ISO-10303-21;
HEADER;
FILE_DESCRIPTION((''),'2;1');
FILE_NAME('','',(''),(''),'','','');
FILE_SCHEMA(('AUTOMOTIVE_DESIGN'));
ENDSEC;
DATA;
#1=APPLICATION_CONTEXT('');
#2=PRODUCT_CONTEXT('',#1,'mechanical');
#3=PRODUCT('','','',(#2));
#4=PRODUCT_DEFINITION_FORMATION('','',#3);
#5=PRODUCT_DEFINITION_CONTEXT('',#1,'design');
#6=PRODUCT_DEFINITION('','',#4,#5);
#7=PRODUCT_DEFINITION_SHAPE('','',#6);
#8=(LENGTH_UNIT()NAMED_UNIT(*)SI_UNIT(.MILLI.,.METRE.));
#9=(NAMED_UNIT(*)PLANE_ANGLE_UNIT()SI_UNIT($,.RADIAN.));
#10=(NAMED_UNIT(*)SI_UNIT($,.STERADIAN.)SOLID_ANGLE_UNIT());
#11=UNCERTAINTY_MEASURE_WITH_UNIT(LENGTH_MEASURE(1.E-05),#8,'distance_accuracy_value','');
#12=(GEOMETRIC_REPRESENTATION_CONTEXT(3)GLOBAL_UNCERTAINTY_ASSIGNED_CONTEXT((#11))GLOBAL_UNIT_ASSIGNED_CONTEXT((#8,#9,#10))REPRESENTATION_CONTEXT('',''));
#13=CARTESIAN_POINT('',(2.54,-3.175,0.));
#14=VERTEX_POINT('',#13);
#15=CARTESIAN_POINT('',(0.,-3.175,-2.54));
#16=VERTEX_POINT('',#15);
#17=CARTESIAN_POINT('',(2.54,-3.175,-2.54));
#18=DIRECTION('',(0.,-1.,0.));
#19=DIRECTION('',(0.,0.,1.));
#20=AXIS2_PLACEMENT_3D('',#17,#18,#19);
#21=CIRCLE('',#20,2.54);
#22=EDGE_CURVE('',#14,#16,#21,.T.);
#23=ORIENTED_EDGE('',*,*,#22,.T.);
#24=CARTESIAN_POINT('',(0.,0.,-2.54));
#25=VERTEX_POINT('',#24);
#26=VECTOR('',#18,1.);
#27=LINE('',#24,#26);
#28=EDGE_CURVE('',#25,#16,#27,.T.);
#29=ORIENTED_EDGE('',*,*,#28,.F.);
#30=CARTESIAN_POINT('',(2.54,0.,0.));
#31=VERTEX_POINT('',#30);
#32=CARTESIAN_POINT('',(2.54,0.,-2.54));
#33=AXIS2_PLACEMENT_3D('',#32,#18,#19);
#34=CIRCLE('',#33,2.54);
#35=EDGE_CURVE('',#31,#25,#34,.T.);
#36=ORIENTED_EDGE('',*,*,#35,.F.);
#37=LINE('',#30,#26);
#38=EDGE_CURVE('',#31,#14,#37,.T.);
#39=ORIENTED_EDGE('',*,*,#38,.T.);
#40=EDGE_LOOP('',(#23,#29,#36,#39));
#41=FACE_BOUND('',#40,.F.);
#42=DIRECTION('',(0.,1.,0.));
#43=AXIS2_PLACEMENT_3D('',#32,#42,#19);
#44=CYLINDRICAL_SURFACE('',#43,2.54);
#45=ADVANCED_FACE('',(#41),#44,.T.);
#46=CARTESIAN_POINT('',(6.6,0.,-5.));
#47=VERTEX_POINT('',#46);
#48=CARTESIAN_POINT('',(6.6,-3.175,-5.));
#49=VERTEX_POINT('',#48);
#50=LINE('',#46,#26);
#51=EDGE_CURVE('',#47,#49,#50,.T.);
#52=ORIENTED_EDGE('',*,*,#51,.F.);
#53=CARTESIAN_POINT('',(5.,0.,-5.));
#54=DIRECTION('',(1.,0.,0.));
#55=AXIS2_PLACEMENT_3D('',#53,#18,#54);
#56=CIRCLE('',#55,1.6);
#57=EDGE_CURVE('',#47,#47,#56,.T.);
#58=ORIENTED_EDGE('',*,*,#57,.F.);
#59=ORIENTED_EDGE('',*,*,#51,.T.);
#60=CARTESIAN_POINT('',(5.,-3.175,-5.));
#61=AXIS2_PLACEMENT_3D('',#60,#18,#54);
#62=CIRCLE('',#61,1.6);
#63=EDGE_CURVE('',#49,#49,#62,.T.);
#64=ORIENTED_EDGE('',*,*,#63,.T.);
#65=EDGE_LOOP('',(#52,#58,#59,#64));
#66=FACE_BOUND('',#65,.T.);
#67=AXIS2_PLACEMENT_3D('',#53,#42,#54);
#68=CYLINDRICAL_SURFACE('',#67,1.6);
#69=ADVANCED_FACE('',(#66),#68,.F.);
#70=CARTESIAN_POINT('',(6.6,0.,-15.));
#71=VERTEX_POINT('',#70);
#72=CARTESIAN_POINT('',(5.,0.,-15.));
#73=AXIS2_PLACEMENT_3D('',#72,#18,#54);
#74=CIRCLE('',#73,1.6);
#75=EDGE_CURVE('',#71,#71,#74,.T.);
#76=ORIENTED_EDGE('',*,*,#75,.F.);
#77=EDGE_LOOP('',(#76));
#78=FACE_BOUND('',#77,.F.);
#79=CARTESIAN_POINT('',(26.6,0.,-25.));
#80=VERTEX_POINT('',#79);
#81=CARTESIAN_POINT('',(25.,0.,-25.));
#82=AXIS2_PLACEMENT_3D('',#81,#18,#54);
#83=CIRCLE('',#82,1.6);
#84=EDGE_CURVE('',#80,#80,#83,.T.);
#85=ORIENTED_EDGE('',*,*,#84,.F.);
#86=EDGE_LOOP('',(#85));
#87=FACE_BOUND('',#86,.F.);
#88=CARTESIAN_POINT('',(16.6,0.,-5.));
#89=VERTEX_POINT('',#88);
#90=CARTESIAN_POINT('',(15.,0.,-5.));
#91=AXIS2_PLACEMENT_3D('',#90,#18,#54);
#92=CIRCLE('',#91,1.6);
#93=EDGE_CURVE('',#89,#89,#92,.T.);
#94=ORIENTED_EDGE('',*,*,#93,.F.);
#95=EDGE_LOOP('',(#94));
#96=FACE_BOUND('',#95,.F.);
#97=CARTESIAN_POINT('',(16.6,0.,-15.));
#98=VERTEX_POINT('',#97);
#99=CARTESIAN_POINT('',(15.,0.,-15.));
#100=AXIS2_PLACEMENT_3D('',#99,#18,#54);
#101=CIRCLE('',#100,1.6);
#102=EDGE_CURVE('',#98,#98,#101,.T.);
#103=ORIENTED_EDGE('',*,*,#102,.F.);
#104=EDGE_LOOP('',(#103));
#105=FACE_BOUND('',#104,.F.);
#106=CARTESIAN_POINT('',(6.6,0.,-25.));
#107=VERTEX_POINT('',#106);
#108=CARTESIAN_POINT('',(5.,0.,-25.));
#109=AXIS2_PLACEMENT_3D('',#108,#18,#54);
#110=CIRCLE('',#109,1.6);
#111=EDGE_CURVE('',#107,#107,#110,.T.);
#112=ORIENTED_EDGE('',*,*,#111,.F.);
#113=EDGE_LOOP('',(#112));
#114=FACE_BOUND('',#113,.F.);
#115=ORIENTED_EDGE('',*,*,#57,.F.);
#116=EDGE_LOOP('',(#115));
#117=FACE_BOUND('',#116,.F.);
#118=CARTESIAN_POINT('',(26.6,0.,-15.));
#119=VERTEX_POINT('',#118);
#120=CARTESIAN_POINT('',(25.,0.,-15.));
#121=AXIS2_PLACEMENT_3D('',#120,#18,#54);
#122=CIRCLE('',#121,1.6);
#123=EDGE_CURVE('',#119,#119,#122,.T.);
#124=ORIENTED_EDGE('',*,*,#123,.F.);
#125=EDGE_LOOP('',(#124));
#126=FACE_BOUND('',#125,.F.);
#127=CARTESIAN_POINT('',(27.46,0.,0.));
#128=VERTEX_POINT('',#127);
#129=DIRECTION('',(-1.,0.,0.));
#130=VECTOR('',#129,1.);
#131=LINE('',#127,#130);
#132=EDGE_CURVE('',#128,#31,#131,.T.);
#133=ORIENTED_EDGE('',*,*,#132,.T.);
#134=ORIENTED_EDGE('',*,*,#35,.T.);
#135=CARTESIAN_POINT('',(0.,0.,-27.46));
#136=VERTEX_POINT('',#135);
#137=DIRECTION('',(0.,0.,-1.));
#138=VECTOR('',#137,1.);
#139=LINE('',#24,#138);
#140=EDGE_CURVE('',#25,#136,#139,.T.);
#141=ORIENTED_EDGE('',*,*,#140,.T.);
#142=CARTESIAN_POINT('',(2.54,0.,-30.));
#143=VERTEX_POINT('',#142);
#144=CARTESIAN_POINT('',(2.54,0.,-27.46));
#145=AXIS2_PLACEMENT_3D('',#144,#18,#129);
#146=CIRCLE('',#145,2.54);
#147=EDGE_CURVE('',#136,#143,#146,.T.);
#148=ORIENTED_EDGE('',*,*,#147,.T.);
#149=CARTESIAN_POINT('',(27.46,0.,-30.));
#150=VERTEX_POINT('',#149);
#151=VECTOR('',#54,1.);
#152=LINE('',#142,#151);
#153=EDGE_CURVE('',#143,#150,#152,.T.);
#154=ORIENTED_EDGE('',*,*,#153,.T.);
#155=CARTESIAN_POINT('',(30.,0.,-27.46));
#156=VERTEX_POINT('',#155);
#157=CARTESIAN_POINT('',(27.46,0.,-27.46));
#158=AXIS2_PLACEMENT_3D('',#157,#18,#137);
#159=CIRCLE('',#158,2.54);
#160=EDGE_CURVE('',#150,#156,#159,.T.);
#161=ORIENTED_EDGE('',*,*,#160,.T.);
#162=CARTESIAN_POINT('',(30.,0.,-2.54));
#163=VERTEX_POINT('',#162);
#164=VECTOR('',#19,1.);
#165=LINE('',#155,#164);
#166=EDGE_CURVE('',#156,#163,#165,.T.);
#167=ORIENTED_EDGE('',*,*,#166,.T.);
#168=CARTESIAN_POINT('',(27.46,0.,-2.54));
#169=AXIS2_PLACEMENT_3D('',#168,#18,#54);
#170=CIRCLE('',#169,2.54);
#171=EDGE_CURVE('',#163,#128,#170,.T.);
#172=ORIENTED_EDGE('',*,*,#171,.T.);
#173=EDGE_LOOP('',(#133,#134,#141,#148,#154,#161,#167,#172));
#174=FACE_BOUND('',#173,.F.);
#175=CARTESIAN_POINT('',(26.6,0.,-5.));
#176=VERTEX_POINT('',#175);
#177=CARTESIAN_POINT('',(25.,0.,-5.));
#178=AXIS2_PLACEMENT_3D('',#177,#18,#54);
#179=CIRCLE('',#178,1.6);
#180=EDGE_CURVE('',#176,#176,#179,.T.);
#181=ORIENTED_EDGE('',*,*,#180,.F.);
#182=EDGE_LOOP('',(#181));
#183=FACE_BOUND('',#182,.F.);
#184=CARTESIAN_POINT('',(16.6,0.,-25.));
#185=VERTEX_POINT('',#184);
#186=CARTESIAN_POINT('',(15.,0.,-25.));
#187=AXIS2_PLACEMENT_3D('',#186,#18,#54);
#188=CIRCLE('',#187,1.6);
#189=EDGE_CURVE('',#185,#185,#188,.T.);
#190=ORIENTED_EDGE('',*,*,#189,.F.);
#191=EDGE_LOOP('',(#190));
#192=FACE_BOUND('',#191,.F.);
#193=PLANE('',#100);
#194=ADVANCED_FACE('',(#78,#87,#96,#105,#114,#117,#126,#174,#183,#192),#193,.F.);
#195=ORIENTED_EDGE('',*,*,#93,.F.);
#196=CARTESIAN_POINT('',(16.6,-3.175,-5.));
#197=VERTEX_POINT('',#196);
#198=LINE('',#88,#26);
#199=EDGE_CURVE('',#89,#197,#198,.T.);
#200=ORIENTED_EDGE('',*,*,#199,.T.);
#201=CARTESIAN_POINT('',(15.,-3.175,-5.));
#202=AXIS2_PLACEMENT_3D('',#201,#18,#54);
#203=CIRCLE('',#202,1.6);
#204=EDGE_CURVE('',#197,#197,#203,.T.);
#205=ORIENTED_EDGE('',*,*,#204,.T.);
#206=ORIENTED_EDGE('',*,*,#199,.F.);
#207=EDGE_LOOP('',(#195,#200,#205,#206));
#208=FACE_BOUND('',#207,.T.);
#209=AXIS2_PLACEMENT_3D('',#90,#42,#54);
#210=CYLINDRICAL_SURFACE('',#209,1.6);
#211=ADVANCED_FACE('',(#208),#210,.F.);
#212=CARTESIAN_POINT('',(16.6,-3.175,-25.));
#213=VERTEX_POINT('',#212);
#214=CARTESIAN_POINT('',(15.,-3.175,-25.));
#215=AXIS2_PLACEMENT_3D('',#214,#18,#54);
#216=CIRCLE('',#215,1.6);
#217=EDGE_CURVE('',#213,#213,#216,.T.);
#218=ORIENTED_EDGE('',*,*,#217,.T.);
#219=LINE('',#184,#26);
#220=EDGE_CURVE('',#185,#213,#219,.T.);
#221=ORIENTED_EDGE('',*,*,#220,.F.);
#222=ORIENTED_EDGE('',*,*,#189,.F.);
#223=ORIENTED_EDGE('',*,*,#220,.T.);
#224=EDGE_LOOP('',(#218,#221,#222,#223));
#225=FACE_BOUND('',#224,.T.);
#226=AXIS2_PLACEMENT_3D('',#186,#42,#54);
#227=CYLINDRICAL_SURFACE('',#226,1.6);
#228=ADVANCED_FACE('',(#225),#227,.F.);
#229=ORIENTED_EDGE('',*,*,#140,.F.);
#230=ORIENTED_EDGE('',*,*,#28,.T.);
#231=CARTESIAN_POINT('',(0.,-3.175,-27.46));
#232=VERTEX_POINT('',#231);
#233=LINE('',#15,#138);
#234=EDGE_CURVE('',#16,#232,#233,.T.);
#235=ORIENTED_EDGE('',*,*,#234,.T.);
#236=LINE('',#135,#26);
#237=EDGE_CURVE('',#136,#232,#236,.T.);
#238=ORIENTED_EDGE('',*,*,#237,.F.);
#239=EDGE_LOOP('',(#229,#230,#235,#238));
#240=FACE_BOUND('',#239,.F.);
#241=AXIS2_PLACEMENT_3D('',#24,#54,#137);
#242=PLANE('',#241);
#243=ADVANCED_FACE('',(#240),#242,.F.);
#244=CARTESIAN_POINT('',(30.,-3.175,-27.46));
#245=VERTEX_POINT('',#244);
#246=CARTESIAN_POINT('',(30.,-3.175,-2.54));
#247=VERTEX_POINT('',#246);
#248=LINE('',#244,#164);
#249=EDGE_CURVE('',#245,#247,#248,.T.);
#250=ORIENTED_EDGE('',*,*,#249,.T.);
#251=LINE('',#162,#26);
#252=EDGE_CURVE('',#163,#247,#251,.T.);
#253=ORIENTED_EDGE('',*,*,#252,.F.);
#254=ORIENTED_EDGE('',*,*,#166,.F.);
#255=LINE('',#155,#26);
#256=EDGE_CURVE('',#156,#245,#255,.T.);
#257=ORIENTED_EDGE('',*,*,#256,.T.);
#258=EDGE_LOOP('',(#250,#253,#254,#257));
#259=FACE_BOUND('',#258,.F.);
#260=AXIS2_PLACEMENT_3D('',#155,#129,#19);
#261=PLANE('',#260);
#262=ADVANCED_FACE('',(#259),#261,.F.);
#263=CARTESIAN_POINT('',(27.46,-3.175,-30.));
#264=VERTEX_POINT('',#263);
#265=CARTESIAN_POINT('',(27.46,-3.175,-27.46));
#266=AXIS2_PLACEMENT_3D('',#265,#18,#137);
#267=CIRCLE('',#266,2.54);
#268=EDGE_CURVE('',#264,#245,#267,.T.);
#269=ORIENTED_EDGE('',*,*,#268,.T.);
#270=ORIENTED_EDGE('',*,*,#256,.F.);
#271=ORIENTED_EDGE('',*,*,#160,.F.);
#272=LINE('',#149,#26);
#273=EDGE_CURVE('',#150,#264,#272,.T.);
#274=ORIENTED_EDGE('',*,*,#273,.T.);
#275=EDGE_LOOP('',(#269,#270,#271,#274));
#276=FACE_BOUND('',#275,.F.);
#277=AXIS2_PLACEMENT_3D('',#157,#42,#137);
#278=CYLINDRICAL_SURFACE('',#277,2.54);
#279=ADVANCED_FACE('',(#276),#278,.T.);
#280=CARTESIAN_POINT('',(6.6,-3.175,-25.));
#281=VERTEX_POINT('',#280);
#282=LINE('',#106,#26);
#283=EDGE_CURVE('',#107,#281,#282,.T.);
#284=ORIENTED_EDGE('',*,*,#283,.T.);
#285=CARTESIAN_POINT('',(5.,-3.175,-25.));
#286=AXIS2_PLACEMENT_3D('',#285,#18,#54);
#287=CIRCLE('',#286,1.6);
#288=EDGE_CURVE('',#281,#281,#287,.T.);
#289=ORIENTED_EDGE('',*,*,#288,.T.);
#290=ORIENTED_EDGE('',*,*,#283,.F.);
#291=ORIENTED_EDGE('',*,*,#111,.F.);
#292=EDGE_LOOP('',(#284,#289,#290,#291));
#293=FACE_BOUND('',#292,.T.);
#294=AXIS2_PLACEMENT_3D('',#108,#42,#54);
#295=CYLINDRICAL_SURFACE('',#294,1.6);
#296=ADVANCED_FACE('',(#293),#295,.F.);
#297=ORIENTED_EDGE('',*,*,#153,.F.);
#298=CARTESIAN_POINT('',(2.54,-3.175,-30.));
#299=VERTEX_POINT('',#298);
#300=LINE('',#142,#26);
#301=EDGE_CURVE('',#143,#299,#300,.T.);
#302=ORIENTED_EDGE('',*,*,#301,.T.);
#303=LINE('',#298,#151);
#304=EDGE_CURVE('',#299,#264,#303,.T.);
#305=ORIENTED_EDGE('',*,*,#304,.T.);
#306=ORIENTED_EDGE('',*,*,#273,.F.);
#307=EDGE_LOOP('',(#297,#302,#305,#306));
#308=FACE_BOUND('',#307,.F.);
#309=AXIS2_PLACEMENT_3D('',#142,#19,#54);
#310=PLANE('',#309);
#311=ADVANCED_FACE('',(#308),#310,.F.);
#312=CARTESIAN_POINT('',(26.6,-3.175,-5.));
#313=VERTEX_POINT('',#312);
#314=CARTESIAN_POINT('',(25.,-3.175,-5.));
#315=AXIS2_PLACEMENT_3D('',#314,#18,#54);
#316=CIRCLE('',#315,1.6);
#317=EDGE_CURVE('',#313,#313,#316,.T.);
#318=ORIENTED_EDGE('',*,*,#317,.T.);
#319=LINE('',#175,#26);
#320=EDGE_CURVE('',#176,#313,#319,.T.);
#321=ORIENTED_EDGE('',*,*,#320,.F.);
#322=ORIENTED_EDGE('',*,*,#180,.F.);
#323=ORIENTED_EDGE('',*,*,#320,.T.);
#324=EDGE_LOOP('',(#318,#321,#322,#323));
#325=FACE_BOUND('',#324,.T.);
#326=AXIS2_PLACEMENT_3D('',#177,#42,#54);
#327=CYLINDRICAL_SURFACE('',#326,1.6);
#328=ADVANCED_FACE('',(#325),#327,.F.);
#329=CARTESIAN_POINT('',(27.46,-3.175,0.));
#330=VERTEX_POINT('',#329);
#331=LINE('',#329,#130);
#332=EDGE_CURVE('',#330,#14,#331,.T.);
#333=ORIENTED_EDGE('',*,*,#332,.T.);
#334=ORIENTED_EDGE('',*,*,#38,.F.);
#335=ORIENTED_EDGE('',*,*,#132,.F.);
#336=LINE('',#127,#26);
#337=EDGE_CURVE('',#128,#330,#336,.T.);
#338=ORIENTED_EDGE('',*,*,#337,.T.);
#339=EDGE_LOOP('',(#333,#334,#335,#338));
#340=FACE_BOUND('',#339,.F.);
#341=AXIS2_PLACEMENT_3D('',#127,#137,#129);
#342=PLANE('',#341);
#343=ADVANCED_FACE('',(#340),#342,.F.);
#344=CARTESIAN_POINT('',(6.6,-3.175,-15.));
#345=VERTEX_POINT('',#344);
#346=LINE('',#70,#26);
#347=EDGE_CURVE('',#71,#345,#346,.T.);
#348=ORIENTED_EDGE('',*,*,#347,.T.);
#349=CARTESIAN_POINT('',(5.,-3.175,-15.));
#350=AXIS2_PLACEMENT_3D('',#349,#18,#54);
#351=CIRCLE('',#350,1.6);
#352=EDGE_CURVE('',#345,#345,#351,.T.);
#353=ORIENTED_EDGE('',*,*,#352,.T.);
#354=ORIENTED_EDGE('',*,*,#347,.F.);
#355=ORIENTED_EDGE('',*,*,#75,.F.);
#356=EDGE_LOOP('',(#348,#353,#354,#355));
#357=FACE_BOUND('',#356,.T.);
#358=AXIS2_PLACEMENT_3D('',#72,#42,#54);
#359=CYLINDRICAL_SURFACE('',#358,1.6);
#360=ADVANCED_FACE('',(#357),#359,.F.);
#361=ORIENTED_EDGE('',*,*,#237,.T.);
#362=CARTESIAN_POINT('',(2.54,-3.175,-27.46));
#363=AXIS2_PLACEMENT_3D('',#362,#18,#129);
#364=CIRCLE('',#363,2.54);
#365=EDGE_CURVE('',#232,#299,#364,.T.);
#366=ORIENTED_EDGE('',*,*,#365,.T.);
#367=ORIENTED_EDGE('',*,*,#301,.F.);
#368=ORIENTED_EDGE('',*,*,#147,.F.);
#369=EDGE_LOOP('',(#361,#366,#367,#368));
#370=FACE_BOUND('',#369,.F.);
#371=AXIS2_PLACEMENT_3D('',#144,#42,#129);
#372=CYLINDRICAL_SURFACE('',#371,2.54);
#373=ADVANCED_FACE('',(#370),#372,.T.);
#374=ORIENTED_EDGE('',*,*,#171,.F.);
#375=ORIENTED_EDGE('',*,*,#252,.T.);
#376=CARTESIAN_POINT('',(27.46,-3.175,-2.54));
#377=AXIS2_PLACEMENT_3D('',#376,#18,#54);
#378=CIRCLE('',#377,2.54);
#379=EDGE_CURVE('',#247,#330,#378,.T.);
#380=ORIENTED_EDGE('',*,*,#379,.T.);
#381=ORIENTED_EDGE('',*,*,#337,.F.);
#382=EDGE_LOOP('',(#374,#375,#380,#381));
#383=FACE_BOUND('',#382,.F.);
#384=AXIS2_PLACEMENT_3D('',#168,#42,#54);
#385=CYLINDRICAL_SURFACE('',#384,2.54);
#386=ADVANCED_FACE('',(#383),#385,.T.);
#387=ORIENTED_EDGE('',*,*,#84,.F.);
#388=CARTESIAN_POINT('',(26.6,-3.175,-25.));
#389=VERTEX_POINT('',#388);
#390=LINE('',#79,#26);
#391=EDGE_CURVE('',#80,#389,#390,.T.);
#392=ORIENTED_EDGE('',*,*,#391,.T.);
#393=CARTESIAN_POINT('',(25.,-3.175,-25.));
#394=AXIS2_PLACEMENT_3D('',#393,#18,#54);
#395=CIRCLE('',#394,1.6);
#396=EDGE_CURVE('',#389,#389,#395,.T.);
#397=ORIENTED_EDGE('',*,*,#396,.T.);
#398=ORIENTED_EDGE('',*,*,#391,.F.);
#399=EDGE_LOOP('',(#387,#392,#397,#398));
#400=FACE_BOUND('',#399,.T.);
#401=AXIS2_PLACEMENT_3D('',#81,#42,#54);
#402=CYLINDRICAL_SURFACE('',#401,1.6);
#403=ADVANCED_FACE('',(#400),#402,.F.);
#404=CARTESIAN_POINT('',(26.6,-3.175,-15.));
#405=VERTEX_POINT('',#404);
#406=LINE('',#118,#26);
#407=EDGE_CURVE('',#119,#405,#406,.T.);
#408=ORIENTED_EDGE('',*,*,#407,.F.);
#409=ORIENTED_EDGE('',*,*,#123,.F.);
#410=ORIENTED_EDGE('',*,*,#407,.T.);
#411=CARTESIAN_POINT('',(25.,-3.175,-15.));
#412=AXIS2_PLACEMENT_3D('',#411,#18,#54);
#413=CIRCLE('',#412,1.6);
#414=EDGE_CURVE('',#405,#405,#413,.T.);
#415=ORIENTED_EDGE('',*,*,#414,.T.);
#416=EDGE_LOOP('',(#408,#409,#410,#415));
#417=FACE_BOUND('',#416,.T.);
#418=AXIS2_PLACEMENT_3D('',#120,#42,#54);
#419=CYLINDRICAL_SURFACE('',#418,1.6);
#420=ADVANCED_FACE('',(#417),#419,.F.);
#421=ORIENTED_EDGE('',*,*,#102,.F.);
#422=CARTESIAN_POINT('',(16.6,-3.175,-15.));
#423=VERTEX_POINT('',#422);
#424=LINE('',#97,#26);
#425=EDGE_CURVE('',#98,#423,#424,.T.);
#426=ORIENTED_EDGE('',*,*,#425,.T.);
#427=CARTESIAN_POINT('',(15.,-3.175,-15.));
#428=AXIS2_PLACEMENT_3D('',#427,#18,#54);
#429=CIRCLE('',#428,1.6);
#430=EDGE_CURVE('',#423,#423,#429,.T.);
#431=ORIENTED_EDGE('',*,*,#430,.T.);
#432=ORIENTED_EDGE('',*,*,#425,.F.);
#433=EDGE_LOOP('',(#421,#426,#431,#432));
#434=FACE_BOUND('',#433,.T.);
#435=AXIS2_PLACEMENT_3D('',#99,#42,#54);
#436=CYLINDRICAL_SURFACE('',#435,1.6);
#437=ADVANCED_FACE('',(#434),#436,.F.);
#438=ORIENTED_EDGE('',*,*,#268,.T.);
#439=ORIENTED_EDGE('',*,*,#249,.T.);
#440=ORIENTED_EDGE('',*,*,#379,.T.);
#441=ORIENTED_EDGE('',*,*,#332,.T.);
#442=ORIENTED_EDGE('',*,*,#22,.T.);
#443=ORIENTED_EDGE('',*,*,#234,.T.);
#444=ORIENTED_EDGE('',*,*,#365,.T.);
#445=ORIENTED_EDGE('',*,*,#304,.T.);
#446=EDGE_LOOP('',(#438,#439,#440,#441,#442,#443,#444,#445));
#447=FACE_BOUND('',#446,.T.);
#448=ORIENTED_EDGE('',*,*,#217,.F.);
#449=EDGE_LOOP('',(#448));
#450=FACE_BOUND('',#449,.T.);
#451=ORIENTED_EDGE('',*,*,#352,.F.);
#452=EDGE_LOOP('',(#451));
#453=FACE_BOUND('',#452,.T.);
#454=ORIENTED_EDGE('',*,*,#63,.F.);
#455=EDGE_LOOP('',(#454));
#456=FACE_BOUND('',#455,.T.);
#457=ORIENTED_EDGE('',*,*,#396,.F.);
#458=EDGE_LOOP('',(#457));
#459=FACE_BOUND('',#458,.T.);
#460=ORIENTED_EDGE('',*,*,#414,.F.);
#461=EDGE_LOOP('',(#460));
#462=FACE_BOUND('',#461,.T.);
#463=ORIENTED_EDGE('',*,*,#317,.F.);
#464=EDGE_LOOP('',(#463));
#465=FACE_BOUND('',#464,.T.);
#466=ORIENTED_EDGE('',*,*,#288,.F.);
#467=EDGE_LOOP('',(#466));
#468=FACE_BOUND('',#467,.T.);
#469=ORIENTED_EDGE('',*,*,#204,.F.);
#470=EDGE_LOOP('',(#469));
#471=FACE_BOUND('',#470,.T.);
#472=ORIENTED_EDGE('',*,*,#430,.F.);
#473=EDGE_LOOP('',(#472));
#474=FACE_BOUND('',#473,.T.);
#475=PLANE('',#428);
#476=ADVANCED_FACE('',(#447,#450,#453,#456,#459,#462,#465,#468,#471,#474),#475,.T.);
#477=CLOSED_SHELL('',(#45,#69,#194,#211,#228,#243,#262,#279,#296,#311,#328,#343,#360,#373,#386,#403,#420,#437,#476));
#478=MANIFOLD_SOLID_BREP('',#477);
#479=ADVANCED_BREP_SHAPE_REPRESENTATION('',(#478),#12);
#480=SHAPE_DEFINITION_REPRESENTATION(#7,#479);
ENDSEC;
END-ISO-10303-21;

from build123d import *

# Parameters (mm, degrees)
F0_R     = 1.6
F1_DEPTH = 3.175


# Not quite as in the source:
# - a length typed as a fraction of an inch, garbled in the dataset ("3 / 203.2 mm" for 3/8 in), is restored


with BuildPart() as f1:
    # F0 (on Front) → F1 (new body)
    with BuildSketch(Plane.XZ):
        with BuildLine():
            Line((27.46, 0), (2.54, 0))
            ThreePointArc((2.54, 0), (0.7439487758, -0.7439487758), (0, -2.54))
            Line((0, -2.54), (0, -27.46))
            ThreePointArc((0, -27.46), (0.7439487758, -29.2560512242), (2.54, -30))
            Line((2.54, -30), (27.46, -30))
            ThreePointArc((27.46, -30), (29.2560512242, -29.2560512242), (30, -27.46))
            Line((30, -27.46), (30, -2.54))
            ThreePointArc((30, -2.54), (29.2560512242, -0.7439487758), (27.46, 0))
        make_face()
        with Locations((5, -25)):
            Circle(F0_R, mode=Mode.SUBTRACT)
        with Locations((15, -25)):
            Circle(F0_R, mode=Mode.SUBTRACT)
        with Locations((25, -25)):
            Circle(F0_R, mode=Mode.SUBTRACT)
        with Locations((5, -15)):
            Circle(F0_R, mode=Mode.SUBTRACT)
        with Locations((5, -5)):
            Circle(F0_R, mode=Mode.SUBTRACT)
        with Locations((15, -15)):
            Circle(F0_R, mode=Mode.SUBTRACT)
        with Locations((25, -15)):
            Circle(F0_R, mode=Mode.SUBTRACT)
        with Locations((15, -5)):
            Circle(F0_R, mode=Mode.SUBTRACT)
        with Locations((25, -5)):
            Circle(F0_R, mode=Mode.SUBTRACT)
    extrude(amount=F1_DEPTH)


solid = f1.part
